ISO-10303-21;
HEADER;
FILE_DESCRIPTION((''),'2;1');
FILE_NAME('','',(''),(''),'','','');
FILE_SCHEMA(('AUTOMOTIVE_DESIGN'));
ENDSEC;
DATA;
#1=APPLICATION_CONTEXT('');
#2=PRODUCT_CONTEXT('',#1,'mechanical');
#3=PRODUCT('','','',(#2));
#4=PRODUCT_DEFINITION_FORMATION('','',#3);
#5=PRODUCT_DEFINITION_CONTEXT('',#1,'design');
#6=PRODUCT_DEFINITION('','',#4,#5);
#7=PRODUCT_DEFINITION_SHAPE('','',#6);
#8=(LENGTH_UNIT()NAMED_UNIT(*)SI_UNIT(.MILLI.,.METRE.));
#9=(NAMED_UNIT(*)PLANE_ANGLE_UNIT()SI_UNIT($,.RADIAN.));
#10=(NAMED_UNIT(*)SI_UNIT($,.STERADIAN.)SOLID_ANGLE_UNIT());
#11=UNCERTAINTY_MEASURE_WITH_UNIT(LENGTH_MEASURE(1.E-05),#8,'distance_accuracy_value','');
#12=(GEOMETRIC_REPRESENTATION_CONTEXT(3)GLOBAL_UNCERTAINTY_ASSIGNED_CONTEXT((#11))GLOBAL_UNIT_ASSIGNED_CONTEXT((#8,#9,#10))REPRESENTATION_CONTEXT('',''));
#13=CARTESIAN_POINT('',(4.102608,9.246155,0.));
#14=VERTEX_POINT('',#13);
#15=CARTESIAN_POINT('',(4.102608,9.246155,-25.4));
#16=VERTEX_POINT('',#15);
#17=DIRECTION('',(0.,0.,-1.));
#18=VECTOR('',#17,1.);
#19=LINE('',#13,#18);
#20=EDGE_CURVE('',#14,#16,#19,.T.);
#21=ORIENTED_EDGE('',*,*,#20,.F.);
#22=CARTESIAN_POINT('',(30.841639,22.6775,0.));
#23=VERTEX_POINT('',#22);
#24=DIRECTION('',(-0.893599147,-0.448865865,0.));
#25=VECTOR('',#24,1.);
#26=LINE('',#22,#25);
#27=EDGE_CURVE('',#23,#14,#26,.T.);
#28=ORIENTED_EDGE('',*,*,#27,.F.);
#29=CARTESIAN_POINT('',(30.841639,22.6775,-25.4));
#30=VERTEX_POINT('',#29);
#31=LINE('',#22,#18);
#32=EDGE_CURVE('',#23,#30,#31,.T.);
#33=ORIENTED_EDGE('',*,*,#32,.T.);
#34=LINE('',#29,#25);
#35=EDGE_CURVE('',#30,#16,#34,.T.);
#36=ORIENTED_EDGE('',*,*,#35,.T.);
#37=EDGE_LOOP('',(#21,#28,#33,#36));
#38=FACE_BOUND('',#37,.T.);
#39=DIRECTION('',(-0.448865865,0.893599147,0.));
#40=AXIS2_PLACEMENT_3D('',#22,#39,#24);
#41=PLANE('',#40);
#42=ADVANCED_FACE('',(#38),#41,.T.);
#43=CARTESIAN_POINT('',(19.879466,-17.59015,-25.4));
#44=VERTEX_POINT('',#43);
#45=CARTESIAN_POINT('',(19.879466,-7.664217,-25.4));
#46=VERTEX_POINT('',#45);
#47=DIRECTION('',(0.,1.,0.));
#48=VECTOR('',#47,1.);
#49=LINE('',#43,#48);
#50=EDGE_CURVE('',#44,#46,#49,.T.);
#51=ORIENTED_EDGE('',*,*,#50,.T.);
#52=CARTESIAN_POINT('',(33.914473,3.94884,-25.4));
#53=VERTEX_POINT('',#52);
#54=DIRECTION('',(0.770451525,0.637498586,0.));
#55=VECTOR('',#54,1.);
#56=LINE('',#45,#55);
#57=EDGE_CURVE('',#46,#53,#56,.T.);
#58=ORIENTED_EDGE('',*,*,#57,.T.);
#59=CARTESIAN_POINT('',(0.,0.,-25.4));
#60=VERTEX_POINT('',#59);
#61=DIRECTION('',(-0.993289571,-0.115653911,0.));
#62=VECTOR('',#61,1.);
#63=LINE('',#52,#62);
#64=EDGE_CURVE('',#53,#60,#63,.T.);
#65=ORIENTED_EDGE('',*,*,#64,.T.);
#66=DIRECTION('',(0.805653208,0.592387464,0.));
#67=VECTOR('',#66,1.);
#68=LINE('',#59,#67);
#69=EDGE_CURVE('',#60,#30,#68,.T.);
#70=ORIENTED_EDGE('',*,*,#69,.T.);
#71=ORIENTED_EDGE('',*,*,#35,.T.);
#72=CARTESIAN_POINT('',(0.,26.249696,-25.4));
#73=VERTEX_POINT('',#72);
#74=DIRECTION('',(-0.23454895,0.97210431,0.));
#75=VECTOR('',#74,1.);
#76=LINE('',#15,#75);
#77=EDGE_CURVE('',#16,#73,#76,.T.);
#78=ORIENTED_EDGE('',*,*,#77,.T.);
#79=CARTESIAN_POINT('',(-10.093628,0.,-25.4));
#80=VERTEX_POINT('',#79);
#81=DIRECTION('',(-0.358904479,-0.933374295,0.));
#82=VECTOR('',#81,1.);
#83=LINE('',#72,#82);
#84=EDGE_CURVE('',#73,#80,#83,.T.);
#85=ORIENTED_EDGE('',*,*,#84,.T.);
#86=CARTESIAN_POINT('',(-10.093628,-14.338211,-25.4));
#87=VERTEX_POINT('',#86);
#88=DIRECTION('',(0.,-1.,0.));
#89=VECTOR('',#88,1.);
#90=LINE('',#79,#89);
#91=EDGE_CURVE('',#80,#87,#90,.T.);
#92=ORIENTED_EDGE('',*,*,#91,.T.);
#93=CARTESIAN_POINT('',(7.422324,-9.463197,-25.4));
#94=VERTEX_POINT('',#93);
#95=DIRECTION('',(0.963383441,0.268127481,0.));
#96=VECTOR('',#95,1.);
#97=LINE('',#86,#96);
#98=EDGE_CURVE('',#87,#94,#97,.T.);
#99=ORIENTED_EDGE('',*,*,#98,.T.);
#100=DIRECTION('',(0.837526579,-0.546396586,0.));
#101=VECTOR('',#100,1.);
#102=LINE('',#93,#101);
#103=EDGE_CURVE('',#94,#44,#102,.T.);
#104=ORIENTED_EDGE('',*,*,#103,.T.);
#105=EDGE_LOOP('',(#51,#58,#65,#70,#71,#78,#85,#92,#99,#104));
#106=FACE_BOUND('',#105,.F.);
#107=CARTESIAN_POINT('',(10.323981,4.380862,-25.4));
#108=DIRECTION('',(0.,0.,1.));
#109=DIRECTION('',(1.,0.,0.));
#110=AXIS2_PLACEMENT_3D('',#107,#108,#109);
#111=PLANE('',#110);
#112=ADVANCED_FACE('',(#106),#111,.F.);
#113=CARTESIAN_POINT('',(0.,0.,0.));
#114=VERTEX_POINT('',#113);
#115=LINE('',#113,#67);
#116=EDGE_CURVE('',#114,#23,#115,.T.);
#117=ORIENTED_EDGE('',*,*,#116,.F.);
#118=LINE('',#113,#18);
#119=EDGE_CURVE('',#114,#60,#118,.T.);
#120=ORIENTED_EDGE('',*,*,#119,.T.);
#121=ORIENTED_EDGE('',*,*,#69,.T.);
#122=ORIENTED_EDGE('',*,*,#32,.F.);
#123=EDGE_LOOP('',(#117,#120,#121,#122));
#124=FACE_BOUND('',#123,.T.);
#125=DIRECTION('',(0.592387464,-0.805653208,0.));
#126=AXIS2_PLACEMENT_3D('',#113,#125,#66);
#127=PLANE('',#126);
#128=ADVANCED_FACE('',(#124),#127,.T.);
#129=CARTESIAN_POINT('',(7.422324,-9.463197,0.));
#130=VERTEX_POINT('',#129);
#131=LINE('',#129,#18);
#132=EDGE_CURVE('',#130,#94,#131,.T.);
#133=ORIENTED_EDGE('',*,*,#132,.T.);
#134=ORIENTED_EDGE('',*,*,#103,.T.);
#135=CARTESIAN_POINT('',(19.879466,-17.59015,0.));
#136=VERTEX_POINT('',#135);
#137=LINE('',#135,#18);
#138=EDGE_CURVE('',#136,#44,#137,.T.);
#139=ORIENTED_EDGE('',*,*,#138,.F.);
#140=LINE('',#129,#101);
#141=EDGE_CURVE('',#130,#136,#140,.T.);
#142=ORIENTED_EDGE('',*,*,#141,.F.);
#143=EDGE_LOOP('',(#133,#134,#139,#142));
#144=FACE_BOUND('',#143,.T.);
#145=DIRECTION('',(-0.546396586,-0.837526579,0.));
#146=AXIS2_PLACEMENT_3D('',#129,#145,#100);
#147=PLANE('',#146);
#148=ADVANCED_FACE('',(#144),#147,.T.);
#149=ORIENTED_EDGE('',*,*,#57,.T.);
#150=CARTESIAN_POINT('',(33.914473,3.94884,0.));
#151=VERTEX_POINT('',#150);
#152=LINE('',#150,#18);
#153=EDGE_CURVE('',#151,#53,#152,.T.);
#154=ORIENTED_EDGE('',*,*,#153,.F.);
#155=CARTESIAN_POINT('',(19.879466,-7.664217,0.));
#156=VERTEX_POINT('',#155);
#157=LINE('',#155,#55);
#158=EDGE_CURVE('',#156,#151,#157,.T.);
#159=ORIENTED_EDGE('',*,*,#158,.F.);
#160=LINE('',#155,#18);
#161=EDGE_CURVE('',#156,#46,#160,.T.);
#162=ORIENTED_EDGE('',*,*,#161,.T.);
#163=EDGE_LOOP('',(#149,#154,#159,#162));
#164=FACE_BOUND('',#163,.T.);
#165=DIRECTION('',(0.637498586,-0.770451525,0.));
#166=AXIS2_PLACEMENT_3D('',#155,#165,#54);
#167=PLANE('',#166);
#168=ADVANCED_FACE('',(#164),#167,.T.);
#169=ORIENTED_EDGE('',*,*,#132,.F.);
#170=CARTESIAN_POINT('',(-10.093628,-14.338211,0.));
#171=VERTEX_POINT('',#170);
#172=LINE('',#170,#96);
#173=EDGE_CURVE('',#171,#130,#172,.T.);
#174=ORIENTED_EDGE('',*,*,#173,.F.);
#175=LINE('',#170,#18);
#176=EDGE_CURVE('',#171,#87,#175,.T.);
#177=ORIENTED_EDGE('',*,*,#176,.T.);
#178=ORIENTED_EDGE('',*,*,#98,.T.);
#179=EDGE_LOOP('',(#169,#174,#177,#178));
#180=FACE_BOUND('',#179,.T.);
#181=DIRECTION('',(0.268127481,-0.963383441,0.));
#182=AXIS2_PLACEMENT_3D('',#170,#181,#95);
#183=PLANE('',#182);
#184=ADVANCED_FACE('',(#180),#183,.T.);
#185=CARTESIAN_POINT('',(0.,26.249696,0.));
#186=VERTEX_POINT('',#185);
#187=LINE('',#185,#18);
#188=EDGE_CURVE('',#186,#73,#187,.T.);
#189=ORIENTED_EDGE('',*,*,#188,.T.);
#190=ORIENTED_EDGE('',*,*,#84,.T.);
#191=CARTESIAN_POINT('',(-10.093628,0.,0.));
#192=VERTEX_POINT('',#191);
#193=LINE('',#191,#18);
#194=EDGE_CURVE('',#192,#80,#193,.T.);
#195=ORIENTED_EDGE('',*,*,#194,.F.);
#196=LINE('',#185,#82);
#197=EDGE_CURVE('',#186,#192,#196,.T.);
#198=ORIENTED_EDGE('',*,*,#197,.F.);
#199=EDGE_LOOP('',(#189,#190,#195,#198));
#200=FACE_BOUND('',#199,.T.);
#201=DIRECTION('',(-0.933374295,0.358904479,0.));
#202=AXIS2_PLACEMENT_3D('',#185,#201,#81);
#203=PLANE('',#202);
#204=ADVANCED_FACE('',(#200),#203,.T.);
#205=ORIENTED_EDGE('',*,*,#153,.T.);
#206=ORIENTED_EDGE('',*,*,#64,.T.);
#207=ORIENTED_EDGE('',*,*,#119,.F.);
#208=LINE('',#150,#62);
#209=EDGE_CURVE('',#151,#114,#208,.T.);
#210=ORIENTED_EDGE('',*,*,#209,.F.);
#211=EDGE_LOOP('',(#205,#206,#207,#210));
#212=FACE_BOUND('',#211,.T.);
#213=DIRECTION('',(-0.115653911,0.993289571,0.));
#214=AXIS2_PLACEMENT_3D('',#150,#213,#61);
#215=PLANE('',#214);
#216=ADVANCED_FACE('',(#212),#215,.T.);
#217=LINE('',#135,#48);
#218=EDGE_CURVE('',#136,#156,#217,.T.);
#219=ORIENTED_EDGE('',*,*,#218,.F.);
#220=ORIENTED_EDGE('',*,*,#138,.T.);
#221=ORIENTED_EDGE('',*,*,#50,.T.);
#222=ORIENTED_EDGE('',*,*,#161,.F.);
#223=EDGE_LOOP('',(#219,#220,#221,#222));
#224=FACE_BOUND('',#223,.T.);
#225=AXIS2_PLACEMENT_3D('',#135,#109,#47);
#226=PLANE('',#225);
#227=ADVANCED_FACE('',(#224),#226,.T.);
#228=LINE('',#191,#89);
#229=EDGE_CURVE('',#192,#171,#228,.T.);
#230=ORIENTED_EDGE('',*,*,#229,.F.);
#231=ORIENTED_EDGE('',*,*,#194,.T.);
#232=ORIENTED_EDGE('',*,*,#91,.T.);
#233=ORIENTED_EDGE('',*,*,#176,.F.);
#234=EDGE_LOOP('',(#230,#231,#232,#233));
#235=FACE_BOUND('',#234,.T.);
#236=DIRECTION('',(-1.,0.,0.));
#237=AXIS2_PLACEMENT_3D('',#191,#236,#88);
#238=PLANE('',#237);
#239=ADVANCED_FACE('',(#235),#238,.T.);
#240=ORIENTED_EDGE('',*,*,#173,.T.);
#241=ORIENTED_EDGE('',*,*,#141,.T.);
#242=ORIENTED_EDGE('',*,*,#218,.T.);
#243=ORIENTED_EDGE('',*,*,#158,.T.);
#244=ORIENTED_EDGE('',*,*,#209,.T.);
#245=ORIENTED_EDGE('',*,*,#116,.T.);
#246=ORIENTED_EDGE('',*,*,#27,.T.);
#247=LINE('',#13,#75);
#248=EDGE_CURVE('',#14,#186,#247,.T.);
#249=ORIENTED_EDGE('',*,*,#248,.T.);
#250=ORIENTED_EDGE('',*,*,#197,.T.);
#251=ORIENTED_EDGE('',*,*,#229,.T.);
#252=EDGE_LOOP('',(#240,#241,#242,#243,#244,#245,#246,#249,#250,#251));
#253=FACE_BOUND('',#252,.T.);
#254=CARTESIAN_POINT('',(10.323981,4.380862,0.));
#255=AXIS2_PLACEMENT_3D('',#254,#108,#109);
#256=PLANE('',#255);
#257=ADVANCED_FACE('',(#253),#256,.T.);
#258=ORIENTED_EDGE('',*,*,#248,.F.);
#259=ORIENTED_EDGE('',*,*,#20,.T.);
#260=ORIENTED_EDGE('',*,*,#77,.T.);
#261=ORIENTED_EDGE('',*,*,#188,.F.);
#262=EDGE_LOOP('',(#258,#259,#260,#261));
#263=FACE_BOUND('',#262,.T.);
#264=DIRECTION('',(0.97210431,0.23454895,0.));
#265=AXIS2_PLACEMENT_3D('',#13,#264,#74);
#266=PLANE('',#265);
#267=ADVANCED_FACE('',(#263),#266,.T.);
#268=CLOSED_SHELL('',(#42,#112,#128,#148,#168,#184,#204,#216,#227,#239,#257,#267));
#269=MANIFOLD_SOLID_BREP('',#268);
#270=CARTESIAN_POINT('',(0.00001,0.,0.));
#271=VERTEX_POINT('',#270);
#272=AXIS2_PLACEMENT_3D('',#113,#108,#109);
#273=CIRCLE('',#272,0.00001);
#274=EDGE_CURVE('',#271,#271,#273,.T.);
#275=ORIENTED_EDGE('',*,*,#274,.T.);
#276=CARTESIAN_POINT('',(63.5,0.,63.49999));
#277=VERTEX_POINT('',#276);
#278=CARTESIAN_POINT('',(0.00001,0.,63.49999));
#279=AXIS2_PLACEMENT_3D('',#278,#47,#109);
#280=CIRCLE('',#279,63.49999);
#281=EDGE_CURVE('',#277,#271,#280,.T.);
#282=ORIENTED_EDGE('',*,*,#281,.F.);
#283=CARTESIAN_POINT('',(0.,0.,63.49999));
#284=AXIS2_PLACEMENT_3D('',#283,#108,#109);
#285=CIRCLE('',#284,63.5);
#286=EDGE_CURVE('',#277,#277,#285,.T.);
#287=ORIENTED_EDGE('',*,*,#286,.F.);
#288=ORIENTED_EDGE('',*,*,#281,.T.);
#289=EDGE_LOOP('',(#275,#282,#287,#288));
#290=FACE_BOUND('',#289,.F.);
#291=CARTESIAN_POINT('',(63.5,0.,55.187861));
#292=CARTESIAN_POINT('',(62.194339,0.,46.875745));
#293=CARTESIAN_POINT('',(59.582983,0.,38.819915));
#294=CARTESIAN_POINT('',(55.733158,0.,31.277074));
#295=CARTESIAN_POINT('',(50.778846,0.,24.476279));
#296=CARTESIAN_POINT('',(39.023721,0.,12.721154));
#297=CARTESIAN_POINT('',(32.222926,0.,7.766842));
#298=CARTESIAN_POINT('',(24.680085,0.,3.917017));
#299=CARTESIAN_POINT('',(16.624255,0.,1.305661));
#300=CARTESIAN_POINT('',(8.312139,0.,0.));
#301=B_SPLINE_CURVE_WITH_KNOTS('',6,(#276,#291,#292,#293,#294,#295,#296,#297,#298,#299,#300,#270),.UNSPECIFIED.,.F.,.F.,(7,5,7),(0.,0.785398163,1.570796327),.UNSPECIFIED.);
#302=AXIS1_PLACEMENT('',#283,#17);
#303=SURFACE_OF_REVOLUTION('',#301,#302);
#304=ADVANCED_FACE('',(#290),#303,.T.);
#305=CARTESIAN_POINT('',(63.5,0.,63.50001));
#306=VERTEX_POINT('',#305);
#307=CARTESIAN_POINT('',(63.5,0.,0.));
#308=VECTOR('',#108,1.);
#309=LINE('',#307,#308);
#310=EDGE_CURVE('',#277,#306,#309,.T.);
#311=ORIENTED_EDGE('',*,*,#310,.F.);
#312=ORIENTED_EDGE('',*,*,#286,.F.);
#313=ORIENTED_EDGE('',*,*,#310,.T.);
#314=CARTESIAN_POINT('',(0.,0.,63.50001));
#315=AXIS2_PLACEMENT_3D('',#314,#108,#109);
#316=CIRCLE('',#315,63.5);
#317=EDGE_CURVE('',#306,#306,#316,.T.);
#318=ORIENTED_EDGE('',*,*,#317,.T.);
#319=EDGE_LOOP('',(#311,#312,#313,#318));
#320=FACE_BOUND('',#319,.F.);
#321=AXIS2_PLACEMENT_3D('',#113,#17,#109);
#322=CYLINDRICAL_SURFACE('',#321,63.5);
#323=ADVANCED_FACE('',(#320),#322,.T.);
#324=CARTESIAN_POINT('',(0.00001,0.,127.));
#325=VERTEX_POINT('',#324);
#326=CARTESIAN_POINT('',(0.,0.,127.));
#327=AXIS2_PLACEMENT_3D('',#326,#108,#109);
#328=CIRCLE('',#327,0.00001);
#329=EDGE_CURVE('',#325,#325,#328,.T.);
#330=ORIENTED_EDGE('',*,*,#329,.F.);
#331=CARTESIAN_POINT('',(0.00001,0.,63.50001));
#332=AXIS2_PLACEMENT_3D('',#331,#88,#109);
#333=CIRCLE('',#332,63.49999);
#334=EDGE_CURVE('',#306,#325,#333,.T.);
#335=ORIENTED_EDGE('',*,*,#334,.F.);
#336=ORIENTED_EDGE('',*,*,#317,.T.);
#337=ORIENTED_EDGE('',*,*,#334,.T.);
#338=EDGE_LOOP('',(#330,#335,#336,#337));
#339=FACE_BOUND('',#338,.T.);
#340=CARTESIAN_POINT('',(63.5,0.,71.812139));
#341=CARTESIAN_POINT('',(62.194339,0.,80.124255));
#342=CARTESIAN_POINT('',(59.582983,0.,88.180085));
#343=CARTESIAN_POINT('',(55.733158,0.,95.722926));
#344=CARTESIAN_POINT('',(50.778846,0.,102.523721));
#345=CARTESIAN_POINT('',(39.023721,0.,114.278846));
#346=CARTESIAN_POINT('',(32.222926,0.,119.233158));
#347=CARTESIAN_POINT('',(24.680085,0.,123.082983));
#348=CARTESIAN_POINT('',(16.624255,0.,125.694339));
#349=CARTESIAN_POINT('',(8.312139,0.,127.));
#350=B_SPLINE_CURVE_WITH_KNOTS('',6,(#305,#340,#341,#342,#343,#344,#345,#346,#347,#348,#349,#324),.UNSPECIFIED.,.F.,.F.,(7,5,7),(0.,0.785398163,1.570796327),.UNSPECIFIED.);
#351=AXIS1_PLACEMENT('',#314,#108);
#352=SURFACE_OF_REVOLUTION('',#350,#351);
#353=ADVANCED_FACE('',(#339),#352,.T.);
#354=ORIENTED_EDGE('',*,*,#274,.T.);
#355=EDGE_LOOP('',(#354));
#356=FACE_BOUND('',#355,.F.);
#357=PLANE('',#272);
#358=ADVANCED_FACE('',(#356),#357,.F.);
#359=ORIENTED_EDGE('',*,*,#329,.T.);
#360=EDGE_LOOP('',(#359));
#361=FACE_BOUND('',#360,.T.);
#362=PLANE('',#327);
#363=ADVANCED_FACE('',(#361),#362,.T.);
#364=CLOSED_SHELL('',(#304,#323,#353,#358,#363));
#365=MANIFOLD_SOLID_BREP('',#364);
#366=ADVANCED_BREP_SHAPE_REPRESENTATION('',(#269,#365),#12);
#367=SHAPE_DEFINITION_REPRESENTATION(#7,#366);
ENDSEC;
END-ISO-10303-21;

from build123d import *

# Parameters (mm, degrees)
F0_R     = 63.5
F1_DEPTH = 127
F2_R     = 63.49999
F4_DEPTH = 25.4


# Not quite as in the source:
# - a fillet or chamfer is up to 0.001 mm smaller than in the source, because OpenCascade refuses the exact size


with BuildPart() as f1:
    # F0 (on Top) → F1 (new body)
    with BuildSketch(Plane.XY):
        Circle(F0_R)
    extrude(amount=F1_DEPTH)

    # F2 (radius 63.5 in the source; OpenCascade refuses exactly that, so slightly less here)
    f2_edges = [f1.edges().sort_by_distance(p)[0] for p in [
        (-63.5, 0, 127),
        (-63.5, 0, 0),
    ]]
    fillet(f2_edges, radius=F2_R)


with BuildPart() as f4:
    # F3 (on Top) → F4 (new body)
    with BuildSketch(Plane.XY):
        Polygon((33.9144729078, 3.948839847), (0, 0), (30.8416392654, 22.6774998009), (4.1026077233, 9.2461546883), (0, 26.2496955693), (-10.0936284289, 0), (-10.0936284289, -14.3382111564), (7.42232427, -9.4631966203), (19.8794659227, -17.5901502371), (19.8794659227, -7.6642166823), align=None)
    extrude(amount=-F4_DEPTH)


solid = Compound([f1.part, f4.part])
